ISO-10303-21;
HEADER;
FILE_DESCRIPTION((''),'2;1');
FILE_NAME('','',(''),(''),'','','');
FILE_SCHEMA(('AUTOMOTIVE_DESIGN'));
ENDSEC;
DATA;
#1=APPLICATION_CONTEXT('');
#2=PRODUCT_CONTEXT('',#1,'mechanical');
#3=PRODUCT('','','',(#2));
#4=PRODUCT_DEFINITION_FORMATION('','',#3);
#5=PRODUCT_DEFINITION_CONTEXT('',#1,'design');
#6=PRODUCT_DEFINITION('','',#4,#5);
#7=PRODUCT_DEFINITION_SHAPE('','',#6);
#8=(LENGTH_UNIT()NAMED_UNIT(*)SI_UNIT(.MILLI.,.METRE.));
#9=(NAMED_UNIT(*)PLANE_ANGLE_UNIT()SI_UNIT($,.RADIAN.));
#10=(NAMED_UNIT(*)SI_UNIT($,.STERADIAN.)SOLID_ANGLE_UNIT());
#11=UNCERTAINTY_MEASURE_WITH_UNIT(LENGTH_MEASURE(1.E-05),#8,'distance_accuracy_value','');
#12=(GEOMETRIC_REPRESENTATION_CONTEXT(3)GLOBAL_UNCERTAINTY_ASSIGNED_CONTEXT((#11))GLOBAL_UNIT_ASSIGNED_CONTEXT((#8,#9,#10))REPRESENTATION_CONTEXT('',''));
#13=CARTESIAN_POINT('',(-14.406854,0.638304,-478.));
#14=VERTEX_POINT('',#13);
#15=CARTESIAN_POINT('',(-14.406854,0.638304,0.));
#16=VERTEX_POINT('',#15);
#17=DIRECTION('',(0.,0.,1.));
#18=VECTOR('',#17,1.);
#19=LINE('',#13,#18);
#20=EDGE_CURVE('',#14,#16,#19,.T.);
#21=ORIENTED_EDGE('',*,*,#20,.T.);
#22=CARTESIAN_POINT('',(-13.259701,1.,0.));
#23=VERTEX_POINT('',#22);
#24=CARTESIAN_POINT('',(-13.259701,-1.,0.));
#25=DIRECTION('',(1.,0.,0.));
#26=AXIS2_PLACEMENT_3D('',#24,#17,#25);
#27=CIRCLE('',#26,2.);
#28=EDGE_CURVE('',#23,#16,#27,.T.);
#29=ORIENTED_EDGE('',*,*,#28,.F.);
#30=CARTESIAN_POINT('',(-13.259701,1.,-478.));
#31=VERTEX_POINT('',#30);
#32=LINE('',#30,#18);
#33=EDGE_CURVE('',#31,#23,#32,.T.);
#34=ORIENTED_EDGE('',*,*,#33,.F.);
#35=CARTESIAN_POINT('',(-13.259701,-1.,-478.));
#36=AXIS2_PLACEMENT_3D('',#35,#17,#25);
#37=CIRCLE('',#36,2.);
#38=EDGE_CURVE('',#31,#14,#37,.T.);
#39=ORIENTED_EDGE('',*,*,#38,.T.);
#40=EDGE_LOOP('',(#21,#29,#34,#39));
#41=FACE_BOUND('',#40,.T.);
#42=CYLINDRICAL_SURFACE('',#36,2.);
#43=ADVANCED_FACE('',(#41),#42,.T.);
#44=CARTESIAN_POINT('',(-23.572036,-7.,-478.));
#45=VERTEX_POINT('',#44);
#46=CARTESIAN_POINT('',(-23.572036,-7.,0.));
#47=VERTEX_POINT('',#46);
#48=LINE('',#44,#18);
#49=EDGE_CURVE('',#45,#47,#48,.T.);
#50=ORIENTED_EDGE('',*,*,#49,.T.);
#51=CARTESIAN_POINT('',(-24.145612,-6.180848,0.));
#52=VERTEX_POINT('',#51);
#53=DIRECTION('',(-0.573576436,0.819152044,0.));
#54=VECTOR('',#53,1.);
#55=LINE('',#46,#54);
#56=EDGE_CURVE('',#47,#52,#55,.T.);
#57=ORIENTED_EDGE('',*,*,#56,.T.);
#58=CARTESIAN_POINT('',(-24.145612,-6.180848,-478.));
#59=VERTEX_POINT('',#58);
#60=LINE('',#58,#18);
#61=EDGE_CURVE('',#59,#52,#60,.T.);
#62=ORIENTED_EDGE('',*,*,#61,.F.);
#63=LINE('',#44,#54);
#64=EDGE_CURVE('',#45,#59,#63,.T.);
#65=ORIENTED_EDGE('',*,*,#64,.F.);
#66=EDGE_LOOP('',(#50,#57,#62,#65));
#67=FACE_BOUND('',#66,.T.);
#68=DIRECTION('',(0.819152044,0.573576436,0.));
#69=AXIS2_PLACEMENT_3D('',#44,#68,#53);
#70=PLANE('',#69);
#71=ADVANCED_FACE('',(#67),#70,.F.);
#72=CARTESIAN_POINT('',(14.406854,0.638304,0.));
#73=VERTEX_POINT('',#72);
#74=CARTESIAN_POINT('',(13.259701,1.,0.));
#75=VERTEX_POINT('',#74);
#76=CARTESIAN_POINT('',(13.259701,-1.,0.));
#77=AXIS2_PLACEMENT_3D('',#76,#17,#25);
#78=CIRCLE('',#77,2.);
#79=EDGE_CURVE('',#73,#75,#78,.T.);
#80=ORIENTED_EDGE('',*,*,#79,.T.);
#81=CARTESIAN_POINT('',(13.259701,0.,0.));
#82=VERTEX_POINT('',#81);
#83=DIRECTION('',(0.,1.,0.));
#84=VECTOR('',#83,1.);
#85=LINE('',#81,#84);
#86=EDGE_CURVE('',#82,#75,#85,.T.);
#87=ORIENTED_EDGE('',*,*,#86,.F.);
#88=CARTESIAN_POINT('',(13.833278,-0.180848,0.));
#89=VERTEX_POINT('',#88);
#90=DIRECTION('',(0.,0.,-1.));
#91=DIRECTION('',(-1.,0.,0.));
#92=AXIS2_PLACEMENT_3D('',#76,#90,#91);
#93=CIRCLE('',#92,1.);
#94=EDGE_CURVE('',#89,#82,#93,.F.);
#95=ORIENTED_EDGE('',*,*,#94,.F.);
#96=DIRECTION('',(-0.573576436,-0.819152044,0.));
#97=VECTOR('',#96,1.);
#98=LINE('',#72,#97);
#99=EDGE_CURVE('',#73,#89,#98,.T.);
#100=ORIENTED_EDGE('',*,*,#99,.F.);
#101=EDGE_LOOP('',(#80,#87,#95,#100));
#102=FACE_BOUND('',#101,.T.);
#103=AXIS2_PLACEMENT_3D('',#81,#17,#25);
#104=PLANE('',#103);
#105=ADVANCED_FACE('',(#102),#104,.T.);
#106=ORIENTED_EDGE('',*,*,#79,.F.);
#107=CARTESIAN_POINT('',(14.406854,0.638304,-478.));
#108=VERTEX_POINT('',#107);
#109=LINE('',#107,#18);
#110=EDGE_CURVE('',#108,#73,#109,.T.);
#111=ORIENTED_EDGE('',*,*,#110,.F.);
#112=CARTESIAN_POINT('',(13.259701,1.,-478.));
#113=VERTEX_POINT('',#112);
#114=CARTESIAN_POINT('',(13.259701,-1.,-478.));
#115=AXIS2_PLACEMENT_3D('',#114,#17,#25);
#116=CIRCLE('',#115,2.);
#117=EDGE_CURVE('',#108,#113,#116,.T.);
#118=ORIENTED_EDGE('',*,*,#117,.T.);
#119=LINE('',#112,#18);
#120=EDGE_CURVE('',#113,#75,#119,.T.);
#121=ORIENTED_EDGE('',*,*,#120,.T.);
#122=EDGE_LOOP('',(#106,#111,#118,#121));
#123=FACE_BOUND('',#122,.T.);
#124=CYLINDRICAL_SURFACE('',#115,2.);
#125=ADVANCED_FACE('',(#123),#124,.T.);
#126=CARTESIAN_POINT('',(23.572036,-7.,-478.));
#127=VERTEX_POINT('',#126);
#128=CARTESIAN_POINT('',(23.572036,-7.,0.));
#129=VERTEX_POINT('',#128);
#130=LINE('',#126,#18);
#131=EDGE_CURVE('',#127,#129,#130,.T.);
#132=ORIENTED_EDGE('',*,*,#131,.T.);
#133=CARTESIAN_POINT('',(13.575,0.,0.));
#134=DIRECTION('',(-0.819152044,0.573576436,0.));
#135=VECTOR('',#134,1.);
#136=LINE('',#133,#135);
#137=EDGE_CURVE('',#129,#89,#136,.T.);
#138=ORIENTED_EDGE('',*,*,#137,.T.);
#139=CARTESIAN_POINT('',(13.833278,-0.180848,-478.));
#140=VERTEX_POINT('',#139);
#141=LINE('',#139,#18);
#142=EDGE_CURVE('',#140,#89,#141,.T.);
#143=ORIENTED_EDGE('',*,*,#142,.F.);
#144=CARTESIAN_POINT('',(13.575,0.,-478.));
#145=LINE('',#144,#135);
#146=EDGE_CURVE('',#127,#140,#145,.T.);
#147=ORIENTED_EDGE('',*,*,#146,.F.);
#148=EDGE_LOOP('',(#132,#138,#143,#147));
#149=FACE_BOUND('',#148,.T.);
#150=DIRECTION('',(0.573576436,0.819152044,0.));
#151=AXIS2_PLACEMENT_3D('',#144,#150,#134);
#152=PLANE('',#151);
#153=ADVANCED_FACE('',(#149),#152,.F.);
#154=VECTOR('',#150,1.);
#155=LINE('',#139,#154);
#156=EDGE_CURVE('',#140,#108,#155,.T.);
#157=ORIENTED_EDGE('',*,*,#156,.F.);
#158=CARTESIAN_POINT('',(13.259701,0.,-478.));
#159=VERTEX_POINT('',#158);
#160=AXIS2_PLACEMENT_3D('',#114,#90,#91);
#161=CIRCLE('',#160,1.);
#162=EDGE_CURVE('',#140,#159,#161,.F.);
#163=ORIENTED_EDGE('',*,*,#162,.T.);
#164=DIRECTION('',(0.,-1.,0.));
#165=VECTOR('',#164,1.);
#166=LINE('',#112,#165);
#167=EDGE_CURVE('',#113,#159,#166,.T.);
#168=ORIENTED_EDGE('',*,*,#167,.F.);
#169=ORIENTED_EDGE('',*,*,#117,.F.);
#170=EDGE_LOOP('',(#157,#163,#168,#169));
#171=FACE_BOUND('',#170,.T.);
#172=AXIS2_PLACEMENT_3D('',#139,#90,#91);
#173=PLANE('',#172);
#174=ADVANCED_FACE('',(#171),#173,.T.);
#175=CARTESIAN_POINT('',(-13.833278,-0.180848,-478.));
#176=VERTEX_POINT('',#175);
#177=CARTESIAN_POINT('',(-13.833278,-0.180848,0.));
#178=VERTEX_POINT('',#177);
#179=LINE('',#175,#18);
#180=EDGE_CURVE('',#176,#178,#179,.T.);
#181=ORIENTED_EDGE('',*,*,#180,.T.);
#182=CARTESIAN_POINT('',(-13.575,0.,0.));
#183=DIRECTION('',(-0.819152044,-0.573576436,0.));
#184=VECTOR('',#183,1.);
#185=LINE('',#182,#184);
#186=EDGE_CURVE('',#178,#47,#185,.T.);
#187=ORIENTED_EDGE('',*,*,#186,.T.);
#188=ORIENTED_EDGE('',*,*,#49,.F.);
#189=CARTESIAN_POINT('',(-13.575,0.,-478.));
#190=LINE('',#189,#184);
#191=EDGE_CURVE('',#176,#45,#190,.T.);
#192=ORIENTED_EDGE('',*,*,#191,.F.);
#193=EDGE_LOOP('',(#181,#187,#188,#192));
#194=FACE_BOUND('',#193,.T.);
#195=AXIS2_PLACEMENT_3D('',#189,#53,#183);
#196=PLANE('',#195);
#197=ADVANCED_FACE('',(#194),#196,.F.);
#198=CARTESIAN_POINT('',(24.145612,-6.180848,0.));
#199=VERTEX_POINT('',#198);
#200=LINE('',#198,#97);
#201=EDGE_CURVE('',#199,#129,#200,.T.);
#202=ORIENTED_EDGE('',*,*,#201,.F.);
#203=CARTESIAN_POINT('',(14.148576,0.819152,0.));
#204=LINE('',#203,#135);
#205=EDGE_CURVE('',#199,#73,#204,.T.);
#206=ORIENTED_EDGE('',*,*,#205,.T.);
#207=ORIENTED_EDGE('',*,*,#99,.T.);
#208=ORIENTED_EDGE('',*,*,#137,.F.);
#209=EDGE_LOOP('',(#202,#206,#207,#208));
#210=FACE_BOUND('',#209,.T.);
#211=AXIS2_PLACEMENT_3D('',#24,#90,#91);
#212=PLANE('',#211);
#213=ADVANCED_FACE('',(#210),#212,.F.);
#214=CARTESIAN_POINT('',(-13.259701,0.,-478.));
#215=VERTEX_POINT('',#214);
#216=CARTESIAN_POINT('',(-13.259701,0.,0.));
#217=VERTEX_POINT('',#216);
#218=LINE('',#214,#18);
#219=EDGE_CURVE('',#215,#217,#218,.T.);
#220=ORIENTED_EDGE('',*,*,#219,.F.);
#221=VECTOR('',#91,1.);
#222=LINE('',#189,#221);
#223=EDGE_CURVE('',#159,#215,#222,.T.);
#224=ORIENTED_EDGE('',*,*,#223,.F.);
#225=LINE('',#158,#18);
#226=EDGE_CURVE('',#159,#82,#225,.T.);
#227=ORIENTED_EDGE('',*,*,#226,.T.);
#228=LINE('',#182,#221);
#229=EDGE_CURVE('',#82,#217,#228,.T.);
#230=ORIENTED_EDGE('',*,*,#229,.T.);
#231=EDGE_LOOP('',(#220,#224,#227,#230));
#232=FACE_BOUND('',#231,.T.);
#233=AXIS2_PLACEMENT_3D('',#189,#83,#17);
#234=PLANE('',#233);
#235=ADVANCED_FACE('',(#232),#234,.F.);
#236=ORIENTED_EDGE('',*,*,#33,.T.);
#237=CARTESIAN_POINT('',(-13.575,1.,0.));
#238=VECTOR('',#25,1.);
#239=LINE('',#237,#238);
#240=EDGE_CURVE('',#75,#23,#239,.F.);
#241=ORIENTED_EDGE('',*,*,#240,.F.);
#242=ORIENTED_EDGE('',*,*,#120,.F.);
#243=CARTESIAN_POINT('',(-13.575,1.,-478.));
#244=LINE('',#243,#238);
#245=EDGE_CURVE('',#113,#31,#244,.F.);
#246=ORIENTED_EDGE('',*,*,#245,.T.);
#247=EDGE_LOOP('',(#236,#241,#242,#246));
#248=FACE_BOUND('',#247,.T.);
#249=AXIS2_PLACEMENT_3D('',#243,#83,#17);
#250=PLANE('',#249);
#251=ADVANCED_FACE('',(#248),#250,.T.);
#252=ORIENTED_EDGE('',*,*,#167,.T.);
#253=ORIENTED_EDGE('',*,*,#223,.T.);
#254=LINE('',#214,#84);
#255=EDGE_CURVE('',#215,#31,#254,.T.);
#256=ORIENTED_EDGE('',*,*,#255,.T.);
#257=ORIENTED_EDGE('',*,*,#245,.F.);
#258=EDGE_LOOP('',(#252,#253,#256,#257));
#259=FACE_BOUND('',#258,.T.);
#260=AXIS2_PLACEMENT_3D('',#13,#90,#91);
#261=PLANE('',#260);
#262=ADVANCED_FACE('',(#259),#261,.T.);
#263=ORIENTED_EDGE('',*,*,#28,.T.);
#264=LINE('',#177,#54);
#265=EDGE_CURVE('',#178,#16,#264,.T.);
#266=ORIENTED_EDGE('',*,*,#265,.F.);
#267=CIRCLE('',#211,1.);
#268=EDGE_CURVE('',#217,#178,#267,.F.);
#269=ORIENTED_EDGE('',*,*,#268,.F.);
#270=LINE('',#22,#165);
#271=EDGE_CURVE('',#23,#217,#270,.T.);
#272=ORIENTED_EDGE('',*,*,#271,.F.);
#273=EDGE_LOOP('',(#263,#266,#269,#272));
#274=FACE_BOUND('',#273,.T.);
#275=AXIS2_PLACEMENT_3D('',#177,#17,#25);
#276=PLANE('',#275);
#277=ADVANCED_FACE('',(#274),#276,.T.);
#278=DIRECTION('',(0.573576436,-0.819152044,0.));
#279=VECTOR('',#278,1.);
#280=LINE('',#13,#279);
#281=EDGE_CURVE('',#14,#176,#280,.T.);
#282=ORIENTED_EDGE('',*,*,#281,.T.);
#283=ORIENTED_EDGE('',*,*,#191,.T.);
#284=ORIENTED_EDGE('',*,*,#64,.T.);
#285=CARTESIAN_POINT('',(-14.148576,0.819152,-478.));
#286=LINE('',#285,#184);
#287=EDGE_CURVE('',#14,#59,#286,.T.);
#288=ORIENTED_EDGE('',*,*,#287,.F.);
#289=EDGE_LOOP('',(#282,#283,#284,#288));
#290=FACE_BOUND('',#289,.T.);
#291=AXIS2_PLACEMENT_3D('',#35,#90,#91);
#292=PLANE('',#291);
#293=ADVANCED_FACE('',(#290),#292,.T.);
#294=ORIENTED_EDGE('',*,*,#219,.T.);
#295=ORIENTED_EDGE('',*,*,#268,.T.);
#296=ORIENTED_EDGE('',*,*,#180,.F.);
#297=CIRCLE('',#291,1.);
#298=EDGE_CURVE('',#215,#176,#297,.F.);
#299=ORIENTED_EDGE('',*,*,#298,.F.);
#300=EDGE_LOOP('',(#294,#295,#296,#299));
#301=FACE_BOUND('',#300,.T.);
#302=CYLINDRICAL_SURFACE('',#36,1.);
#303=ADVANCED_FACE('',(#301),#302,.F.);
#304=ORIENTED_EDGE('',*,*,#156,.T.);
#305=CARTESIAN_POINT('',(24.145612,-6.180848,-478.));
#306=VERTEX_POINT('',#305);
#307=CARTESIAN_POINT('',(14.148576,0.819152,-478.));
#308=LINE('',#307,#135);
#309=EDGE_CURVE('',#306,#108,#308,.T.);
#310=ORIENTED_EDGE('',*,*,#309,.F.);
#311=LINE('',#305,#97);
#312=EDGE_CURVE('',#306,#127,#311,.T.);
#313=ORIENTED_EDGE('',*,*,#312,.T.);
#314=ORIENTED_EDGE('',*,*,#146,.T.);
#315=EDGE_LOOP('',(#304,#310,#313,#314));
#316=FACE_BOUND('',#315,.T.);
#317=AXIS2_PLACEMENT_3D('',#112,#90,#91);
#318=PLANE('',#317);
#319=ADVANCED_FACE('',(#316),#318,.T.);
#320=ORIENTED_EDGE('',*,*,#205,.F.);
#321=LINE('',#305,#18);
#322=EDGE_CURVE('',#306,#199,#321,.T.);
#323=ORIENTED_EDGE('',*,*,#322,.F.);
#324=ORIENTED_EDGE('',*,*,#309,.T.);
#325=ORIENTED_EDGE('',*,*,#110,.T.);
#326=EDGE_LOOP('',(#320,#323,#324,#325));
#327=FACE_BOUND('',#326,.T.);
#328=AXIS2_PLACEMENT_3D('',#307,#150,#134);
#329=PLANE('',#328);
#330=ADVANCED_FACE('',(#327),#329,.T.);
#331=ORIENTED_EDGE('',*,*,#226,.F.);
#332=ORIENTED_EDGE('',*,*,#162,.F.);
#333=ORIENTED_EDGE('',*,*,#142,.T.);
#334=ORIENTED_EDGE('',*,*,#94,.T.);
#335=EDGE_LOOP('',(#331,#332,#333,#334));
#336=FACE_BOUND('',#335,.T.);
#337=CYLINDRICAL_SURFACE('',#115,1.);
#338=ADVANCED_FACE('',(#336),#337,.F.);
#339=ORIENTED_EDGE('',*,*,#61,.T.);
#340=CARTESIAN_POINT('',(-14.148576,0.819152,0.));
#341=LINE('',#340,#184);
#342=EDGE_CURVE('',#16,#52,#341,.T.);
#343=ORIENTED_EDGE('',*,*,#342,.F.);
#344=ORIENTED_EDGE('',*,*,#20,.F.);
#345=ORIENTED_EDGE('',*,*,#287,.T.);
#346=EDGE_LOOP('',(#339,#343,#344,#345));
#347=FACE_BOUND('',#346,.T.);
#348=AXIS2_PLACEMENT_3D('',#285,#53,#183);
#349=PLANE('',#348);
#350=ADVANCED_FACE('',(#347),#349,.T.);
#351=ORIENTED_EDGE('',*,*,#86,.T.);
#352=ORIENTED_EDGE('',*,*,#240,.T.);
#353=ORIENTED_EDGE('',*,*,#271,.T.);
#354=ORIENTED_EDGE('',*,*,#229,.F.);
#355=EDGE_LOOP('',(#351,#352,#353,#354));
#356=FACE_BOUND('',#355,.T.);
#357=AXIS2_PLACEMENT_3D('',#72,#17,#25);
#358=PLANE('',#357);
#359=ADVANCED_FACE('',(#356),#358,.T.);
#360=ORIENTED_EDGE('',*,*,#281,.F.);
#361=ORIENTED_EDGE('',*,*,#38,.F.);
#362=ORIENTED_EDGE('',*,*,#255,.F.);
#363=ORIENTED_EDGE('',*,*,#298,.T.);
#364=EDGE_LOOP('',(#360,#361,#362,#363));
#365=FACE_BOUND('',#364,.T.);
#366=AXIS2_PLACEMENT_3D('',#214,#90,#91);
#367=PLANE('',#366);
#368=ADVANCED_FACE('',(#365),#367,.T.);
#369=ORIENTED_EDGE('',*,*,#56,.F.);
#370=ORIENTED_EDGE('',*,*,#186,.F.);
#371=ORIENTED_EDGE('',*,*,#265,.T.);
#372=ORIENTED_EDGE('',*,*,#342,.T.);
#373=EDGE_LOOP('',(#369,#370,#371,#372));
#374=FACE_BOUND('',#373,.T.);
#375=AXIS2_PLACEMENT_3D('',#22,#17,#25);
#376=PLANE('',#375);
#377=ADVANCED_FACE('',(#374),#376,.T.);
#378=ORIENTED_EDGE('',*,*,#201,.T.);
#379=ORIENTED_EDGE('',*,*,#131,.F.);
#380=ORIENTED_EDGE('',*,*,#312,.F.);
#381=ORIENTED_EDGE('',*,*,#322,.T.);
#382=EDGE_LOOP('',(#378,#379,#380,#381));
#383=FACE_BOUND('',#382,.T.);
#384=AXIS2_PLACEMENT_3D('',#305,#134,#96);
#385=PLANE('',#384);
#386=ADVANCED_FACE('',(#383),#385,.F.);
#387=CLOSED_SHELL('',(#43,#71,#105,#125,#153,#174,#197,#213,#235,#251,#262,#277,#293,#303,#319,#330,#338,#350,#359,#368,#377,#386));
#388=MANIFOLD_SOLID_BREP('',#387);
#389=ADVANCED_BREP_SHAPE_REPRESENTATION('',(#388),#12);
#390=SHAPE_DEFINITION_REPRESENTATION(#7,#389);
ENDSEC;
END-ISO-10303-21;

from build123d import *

# Parameters (mm, degrees)
ODGI_CIE_BAZOWE1_DEPTH = 478


# Sheet-metal steps are written as plain solids
with BuildPart() as part:
    # Szkic1 → Odgięcie bazowe1 (new body)
    with BuildSketch(Plane.XY):
        with BuildLine():
            Line((-23.572036047, -7), (-13.833277647, -0.180847956))
            ThreePointArc((-13.833277647, -0.180847956), (-13.560407011, -0.046283049), (-13.259701211, 0))
            Line((-13.259701211, 0), (13.259701211, 0))
            ThreePointArc((13.259701211, 0), (13.560407011, -0.046283049), (13.833277647, -0.180847956))
            Line((13.833277647, -0.180847956), (23.572036047, -7))
            Line((23.572036047, -7), (24.145612484, -6.180847956))
            Line((24.145612484, -6.180847956), (14.406854084, 0.638304089))
            ThreePointArc((14.406854084, 0.638304089), (13.86111281, 0.907433901), (13.259701211, 1))
            Line((13.259701211, 1), (-13.259701211, 1))
            ThreePointArc((-13.259701211, 1), (-13.86111281, 0.907433901), (-14.406854084, 0.638304089))
            Line((-14.406854084, 0.638304089), (-24.145612484, -6.180847956))
            Line((-24.145612484, -6.180847956), (-23.572036047, -7))
        make_face()
    extrude(amount=-ODGI_CIE_BAZOWE1_DEPTH)


solid = part.part
